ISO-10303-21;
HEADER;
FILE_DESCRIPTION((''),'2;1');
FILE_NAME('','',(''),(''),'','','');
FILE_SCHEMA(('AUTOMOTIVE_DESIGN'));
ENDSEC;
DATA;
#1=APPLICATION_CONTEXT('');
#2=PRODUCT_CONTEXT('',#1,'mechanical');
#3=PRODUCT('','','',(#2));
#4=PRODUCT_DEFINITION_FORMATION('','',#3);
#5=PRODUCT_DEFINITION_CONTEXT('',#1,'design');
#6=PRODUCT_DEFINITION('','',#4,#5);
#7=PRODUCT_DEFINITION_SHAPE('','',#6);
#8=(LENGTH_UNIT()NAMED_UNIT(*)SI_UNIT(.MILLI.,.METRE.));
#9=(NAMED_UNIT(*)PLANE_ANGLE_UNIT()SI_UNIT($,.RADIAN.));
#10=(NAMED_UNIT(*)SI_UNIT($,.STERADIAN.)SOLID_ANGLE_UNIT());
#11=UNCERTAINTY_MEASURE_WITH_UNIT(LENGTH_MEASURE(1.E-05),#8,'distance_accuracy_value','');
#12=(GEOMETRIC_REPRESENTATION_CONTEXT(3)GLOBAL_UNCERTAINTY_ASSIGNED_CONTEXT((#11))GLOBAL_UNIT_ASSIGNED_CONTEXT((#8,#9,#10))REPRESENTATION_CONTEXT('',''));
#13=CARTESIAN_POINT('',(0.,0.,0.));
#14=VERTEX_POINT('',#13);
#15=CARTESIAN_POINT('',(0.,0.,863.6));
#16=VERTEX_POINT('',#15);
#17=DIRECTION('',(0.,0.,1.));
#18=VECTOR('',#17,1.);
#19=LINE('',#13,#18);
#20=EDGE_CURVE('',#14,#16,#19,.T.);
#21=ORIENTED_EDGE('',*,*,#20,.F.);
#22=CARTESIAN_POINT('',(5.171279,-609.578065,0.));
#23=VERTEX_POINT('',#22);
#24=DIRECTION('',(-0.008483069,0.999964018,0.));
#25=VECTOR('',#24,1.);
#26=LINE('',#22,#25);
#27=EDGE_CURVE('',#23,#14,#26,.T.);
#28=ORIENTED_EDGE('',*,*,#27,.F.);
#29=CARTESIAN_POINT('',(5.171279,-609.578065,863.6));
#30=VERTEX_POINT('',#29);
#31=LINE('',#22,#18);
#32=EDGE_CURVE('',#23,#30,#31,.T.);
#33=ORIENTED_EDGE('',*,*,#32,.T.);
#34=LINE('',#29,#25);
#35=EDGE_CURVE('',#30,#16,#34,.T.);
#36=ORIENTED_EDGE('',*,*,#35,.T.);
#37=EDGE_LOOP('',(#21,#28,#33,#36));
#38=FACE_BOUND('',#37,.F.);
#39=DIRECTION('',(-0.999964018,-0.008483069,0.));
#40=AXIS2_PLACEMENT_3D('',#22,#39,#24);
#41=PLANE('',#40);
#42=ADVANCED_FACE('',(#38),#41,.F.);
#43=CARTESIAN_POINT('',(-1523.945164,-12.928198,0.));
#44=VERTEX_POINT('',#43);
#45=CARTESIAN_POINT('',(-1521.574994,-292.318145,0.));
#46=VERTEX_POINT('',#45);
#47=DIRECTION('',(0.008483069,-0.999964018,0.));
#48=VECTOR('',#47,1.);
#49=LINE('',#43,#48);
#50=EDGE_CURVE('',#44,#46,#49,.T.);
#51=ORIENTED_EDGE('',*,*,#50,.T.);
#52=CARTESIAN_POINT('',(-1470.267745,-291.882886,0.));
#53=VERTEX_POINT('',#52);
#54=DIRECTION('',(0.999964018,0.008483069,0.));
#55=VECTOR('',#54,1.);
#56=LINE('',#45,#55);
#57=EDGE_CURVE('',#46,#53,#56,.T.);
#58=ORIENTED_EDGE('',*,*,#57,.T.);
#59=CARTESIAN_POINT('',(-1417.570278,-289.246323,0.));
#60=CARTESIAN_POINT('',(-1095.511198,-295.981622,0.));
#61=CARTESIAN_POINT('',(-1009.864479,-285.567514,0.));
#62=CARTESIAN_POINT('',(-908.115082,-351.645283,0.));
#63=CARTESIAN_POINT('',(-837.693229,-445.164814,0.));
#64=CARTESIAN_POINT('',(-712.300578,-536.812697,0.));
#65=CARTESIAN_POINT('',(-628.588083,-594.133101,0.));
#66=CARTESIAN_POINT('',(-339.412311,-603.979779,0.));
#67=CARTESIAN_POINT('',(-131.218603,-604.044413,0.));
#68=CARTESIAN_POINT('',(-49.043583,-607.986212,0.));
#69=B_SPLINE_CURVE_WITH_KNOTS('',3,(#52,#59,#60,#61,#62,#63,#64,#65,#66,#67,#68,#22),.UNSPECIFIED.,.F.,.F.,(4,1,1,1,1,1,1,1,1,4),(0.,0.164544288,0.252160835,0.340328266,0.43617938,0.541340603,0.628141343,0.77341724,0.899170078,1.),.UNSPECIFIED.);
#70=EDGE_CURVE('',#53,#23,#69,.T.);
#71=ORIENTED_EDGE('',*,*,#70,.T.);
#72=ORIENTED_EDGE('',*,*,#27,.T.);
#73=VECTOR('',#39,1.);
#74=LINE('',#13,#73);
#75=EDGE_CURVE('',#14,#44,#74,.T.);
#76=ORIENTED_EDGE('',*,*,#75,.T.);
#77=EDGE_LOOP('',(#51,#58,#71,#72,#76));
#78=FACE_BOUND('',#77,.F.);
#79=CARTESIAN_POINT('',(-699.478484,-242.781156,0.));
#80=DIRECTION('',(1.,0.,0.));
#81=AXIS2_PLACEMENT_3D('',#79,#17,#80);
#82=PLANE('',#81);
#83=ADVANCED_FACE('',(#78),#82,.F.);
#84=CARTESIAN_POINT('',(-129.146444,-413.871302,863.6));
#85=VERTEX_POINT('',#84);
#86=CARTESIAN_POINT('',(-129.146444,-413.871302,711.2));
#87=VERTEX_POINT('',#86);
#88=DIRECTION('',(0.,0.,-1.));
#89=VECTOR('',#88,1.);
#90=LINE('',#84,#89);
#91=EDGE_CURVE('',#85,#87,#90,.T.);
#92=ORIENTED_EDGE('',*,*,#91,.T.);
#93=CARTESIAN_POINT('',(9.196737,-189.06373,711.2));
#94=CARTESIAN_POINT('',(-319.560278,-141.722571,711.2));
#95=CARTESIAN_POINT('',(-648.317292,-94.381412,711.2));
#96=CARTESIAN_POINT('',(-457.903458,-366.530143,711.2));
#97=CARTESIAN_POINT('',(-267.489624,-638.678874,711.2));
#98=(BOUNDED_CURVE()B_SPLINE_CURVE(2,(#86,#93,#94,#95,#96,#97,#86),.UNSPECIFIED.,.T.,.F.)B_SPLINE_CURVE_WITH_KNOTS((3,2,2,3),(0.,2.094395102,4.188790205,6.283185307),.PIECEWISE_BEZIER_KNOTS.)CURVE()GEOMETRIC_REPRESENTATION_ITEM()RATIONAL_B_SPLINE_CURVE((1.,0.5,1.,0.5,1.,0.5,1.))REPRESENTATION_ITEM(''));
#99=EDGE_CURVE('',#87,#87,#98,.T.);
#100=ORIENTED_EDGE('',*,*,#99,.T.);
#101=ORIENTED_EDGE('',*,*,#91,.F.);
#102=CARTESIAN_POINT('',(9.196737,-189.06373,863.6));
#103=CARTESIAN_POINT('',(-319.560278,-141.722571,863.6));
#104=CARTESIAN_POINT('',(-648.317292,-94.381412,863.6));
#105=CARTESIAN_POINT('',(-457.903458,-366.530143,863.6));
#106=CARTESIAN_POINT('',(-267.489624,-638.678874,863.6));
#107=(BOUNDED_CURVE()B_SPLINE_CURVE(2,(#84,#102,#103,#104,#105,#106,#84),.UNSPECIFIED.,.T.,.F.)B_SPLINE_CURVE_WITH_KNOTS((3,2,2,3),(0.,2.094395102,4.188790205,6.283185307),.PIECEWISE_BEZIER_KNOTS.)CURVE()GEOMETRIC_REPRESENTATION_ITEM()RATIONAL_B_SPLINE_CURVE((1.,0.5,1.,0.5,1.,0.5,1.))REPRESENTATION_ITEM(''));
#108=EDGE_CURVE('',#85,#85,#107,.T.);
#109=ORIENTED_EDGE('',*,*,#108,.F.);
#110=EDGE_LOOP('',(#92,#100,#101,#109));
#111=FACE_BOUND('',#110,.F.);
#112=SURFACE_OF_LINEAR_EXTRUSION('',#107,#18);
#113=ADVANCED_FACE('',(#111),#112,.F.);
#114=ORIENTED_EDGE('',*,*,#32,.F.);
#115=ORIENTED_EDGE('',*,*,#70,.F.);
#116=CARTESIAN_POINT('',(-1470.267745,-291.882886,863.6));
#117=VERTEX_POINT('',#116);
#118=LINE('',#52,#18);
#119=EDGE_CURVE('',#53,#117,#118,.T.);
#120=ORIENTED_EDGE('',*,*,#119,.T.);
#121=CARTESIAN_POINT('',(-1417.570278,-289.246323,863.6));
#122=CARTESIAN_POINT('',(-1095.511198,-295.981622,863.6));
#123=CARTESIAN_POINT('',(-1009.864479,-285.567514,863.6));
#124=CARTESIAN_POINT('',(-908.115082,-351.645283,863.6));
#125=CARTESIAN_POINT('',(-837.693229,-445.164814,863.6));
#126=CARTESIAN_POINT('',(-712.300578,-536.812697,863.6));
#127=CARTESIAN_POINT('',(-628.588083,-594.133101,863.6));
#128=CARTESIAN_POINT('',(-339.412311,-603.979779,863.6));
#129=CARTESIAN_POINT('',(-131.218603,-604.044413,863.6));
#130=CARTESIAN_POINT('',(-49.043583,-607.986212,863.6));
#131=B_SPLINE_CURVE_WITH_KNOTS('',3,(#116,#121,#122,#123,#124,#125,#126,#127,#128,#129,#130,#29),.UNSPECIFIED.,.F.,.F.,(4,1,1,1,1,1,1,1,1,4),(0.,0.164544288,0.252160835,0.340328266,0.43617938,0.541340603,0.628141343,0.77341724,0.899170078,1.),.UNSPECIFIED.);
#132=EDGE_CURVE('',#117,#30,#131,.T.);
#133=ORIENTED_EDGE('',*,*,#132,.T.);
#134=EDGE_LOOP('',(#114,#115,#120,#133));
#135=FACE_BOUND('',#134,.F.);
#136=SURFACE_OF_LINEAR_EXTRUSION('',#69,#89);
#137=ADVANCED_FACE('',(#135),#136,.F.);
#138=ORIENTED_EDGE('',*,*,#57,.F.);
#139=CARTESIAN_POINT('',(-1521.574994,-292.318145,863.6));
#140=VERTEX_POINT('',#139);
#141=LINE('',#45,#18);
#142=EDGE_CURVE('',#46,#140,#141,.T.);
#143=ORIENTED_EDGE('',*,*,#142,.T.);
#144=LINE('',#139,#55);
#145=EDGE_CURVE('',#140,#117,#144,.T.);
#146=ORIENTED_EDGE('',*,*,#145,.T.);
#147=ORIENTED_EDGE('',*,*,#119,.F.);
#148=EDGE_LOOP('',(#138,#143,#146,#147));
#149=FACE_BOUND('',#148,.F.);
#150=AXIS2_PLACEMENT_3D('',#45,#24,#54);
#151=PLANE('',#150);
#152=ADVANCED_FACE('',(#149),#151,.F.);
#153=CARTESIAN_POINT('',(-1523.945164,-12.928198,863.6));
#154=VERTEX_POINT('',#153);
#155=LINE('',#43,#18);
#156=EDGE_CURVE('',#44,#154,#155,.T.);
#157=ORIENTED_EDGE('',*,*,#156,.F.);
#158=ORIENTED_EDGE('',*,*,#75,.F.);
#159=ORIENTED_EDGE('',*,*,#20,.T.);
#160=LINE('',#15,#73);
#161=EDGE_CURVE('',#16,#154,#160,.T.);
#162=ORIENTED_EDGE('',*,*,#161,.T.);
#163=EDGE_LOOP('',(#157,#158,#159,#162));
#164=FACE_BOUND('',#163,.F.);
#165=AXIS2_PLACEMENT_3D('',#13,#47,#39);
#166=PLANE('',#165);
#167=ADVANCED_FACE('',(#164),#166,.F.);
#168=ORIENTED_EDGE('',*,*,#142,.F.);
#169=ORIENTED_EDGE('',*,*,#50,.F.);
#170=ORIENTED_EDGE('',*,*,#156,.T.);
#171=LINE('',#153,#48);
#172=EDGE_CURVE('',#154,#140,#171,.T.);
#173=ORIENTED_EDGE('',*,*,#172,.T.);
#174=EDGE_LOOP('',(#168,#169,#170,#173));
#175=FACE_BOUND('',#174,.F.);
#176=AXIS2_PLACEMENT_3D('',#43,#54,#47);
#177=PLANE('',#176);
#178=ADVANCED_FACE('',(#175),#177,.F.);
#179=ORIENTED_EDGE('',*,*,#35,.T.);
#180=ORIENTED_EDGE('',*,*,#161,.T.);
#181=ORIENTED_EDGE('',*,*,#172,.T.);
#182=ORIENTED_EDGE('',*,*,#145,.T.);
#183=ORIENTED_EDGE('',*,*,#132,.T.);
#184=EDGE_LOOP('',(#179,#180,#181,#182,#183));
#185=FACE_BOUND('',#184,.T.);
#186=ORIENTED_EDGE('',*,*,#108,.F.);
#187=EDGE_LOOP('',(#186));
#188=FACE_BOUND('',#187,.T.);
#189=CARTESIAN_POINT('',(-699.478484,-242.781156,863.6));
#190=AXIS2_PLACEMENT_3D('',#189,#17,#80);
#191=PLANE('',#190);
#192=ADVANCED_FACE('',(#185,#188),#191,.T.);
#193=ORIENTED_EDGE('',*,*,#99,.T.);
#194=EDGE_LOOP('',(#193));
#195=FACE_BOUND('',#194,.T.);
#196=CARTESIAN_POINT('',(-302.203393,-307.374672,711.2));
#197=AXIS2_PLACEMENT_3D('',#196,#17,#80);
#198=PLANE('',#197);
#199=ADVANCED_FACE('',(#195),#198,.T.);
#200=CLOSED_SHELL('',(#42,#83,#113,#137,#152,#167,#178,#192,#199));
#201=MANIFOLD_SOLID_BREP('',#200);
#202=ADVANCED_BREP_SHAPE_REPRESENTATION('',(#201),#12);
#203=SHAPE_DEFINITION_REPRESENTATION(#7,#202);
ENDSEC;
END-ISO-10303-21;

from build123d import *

# Parameters (mm, degrees)
F1_DEPTH = 863.6
F3_DEPTH = 152.4


with BuildPart() as f1:
    # F0 (on Top) → F1 (new body)
    with BuildSketch(Plane.XY):
        with BuildLine():
            Line((5.1712791552, -609.5780654452), (0, 0))
            Line((0, 0), (-1523.945163613, -12.9281978881))
            Line((-1523.945163613, -12.9281978881), (-1521.5749940002, -292.3181445505))
            Line((-1521.5749940002, -292.3181445505), (-1470.267745312, -291.8828859336))
            add(Edge.make_bspline(
                [(-1470.267745312, -291.8828859336), (-1417.5702780767, -289.2463226551), (-1095.5111979406, -295.9816219873), (-1009.8644785837, -285.5675139686), (-908.1150816583, -351.6452825618), (-837.6932292983, -445.1648141807), (-712.3005781961, -536.8126968936), (-628.5880833926, -594.1331007539), (-339.4123112672, -603.9797790496), (-131.2186034217, -604.0444126029), (-49.0435831404, -607.9862117262), (5.1712791552, -609.5780654452)],
                knots=[0, 0, 0, 0, 0.1645442885, 0.2521608346, 0.3403282662, 0.4361793801, 0.5413406025, 0.6281413427, 0.7734172402, 0.8991700782, 1, 1, 1, 1], degree=3))
        make_face()
    extrude(amount=F1_DEPTH)

    # F2 (on face) → F3 (cut)
    with BuildSketch(Plane.XY.offset(863.6)):
        with BuildLine():
            add(Edge.make_bspline(
                [(-129.1464435727, -413.8713023162), (9.1967369441, -189.0637303697), (-319.5602776727, -141.722571319), (-648.3172922894, -94.3814122683), (-457.9034581895, -366.5301432655), (-267.4896240896, -638.6788742627), (-129.1464435727, -413.8713023162)],
                knots=[0, 0, 0, 2.0943951024, 2.0943951024, 4.1887902048, 4.1887902048, 6.2831853072, 6.2831853072, 6.2831853072], degree=2, weights=[1, 0.5, 1, 0.5, 1, 0.5, 1]))
        make_face()
    extrude(amount=-F3_DEPTH, mode=Mode.SUBTRACT)


solid = f1.part
